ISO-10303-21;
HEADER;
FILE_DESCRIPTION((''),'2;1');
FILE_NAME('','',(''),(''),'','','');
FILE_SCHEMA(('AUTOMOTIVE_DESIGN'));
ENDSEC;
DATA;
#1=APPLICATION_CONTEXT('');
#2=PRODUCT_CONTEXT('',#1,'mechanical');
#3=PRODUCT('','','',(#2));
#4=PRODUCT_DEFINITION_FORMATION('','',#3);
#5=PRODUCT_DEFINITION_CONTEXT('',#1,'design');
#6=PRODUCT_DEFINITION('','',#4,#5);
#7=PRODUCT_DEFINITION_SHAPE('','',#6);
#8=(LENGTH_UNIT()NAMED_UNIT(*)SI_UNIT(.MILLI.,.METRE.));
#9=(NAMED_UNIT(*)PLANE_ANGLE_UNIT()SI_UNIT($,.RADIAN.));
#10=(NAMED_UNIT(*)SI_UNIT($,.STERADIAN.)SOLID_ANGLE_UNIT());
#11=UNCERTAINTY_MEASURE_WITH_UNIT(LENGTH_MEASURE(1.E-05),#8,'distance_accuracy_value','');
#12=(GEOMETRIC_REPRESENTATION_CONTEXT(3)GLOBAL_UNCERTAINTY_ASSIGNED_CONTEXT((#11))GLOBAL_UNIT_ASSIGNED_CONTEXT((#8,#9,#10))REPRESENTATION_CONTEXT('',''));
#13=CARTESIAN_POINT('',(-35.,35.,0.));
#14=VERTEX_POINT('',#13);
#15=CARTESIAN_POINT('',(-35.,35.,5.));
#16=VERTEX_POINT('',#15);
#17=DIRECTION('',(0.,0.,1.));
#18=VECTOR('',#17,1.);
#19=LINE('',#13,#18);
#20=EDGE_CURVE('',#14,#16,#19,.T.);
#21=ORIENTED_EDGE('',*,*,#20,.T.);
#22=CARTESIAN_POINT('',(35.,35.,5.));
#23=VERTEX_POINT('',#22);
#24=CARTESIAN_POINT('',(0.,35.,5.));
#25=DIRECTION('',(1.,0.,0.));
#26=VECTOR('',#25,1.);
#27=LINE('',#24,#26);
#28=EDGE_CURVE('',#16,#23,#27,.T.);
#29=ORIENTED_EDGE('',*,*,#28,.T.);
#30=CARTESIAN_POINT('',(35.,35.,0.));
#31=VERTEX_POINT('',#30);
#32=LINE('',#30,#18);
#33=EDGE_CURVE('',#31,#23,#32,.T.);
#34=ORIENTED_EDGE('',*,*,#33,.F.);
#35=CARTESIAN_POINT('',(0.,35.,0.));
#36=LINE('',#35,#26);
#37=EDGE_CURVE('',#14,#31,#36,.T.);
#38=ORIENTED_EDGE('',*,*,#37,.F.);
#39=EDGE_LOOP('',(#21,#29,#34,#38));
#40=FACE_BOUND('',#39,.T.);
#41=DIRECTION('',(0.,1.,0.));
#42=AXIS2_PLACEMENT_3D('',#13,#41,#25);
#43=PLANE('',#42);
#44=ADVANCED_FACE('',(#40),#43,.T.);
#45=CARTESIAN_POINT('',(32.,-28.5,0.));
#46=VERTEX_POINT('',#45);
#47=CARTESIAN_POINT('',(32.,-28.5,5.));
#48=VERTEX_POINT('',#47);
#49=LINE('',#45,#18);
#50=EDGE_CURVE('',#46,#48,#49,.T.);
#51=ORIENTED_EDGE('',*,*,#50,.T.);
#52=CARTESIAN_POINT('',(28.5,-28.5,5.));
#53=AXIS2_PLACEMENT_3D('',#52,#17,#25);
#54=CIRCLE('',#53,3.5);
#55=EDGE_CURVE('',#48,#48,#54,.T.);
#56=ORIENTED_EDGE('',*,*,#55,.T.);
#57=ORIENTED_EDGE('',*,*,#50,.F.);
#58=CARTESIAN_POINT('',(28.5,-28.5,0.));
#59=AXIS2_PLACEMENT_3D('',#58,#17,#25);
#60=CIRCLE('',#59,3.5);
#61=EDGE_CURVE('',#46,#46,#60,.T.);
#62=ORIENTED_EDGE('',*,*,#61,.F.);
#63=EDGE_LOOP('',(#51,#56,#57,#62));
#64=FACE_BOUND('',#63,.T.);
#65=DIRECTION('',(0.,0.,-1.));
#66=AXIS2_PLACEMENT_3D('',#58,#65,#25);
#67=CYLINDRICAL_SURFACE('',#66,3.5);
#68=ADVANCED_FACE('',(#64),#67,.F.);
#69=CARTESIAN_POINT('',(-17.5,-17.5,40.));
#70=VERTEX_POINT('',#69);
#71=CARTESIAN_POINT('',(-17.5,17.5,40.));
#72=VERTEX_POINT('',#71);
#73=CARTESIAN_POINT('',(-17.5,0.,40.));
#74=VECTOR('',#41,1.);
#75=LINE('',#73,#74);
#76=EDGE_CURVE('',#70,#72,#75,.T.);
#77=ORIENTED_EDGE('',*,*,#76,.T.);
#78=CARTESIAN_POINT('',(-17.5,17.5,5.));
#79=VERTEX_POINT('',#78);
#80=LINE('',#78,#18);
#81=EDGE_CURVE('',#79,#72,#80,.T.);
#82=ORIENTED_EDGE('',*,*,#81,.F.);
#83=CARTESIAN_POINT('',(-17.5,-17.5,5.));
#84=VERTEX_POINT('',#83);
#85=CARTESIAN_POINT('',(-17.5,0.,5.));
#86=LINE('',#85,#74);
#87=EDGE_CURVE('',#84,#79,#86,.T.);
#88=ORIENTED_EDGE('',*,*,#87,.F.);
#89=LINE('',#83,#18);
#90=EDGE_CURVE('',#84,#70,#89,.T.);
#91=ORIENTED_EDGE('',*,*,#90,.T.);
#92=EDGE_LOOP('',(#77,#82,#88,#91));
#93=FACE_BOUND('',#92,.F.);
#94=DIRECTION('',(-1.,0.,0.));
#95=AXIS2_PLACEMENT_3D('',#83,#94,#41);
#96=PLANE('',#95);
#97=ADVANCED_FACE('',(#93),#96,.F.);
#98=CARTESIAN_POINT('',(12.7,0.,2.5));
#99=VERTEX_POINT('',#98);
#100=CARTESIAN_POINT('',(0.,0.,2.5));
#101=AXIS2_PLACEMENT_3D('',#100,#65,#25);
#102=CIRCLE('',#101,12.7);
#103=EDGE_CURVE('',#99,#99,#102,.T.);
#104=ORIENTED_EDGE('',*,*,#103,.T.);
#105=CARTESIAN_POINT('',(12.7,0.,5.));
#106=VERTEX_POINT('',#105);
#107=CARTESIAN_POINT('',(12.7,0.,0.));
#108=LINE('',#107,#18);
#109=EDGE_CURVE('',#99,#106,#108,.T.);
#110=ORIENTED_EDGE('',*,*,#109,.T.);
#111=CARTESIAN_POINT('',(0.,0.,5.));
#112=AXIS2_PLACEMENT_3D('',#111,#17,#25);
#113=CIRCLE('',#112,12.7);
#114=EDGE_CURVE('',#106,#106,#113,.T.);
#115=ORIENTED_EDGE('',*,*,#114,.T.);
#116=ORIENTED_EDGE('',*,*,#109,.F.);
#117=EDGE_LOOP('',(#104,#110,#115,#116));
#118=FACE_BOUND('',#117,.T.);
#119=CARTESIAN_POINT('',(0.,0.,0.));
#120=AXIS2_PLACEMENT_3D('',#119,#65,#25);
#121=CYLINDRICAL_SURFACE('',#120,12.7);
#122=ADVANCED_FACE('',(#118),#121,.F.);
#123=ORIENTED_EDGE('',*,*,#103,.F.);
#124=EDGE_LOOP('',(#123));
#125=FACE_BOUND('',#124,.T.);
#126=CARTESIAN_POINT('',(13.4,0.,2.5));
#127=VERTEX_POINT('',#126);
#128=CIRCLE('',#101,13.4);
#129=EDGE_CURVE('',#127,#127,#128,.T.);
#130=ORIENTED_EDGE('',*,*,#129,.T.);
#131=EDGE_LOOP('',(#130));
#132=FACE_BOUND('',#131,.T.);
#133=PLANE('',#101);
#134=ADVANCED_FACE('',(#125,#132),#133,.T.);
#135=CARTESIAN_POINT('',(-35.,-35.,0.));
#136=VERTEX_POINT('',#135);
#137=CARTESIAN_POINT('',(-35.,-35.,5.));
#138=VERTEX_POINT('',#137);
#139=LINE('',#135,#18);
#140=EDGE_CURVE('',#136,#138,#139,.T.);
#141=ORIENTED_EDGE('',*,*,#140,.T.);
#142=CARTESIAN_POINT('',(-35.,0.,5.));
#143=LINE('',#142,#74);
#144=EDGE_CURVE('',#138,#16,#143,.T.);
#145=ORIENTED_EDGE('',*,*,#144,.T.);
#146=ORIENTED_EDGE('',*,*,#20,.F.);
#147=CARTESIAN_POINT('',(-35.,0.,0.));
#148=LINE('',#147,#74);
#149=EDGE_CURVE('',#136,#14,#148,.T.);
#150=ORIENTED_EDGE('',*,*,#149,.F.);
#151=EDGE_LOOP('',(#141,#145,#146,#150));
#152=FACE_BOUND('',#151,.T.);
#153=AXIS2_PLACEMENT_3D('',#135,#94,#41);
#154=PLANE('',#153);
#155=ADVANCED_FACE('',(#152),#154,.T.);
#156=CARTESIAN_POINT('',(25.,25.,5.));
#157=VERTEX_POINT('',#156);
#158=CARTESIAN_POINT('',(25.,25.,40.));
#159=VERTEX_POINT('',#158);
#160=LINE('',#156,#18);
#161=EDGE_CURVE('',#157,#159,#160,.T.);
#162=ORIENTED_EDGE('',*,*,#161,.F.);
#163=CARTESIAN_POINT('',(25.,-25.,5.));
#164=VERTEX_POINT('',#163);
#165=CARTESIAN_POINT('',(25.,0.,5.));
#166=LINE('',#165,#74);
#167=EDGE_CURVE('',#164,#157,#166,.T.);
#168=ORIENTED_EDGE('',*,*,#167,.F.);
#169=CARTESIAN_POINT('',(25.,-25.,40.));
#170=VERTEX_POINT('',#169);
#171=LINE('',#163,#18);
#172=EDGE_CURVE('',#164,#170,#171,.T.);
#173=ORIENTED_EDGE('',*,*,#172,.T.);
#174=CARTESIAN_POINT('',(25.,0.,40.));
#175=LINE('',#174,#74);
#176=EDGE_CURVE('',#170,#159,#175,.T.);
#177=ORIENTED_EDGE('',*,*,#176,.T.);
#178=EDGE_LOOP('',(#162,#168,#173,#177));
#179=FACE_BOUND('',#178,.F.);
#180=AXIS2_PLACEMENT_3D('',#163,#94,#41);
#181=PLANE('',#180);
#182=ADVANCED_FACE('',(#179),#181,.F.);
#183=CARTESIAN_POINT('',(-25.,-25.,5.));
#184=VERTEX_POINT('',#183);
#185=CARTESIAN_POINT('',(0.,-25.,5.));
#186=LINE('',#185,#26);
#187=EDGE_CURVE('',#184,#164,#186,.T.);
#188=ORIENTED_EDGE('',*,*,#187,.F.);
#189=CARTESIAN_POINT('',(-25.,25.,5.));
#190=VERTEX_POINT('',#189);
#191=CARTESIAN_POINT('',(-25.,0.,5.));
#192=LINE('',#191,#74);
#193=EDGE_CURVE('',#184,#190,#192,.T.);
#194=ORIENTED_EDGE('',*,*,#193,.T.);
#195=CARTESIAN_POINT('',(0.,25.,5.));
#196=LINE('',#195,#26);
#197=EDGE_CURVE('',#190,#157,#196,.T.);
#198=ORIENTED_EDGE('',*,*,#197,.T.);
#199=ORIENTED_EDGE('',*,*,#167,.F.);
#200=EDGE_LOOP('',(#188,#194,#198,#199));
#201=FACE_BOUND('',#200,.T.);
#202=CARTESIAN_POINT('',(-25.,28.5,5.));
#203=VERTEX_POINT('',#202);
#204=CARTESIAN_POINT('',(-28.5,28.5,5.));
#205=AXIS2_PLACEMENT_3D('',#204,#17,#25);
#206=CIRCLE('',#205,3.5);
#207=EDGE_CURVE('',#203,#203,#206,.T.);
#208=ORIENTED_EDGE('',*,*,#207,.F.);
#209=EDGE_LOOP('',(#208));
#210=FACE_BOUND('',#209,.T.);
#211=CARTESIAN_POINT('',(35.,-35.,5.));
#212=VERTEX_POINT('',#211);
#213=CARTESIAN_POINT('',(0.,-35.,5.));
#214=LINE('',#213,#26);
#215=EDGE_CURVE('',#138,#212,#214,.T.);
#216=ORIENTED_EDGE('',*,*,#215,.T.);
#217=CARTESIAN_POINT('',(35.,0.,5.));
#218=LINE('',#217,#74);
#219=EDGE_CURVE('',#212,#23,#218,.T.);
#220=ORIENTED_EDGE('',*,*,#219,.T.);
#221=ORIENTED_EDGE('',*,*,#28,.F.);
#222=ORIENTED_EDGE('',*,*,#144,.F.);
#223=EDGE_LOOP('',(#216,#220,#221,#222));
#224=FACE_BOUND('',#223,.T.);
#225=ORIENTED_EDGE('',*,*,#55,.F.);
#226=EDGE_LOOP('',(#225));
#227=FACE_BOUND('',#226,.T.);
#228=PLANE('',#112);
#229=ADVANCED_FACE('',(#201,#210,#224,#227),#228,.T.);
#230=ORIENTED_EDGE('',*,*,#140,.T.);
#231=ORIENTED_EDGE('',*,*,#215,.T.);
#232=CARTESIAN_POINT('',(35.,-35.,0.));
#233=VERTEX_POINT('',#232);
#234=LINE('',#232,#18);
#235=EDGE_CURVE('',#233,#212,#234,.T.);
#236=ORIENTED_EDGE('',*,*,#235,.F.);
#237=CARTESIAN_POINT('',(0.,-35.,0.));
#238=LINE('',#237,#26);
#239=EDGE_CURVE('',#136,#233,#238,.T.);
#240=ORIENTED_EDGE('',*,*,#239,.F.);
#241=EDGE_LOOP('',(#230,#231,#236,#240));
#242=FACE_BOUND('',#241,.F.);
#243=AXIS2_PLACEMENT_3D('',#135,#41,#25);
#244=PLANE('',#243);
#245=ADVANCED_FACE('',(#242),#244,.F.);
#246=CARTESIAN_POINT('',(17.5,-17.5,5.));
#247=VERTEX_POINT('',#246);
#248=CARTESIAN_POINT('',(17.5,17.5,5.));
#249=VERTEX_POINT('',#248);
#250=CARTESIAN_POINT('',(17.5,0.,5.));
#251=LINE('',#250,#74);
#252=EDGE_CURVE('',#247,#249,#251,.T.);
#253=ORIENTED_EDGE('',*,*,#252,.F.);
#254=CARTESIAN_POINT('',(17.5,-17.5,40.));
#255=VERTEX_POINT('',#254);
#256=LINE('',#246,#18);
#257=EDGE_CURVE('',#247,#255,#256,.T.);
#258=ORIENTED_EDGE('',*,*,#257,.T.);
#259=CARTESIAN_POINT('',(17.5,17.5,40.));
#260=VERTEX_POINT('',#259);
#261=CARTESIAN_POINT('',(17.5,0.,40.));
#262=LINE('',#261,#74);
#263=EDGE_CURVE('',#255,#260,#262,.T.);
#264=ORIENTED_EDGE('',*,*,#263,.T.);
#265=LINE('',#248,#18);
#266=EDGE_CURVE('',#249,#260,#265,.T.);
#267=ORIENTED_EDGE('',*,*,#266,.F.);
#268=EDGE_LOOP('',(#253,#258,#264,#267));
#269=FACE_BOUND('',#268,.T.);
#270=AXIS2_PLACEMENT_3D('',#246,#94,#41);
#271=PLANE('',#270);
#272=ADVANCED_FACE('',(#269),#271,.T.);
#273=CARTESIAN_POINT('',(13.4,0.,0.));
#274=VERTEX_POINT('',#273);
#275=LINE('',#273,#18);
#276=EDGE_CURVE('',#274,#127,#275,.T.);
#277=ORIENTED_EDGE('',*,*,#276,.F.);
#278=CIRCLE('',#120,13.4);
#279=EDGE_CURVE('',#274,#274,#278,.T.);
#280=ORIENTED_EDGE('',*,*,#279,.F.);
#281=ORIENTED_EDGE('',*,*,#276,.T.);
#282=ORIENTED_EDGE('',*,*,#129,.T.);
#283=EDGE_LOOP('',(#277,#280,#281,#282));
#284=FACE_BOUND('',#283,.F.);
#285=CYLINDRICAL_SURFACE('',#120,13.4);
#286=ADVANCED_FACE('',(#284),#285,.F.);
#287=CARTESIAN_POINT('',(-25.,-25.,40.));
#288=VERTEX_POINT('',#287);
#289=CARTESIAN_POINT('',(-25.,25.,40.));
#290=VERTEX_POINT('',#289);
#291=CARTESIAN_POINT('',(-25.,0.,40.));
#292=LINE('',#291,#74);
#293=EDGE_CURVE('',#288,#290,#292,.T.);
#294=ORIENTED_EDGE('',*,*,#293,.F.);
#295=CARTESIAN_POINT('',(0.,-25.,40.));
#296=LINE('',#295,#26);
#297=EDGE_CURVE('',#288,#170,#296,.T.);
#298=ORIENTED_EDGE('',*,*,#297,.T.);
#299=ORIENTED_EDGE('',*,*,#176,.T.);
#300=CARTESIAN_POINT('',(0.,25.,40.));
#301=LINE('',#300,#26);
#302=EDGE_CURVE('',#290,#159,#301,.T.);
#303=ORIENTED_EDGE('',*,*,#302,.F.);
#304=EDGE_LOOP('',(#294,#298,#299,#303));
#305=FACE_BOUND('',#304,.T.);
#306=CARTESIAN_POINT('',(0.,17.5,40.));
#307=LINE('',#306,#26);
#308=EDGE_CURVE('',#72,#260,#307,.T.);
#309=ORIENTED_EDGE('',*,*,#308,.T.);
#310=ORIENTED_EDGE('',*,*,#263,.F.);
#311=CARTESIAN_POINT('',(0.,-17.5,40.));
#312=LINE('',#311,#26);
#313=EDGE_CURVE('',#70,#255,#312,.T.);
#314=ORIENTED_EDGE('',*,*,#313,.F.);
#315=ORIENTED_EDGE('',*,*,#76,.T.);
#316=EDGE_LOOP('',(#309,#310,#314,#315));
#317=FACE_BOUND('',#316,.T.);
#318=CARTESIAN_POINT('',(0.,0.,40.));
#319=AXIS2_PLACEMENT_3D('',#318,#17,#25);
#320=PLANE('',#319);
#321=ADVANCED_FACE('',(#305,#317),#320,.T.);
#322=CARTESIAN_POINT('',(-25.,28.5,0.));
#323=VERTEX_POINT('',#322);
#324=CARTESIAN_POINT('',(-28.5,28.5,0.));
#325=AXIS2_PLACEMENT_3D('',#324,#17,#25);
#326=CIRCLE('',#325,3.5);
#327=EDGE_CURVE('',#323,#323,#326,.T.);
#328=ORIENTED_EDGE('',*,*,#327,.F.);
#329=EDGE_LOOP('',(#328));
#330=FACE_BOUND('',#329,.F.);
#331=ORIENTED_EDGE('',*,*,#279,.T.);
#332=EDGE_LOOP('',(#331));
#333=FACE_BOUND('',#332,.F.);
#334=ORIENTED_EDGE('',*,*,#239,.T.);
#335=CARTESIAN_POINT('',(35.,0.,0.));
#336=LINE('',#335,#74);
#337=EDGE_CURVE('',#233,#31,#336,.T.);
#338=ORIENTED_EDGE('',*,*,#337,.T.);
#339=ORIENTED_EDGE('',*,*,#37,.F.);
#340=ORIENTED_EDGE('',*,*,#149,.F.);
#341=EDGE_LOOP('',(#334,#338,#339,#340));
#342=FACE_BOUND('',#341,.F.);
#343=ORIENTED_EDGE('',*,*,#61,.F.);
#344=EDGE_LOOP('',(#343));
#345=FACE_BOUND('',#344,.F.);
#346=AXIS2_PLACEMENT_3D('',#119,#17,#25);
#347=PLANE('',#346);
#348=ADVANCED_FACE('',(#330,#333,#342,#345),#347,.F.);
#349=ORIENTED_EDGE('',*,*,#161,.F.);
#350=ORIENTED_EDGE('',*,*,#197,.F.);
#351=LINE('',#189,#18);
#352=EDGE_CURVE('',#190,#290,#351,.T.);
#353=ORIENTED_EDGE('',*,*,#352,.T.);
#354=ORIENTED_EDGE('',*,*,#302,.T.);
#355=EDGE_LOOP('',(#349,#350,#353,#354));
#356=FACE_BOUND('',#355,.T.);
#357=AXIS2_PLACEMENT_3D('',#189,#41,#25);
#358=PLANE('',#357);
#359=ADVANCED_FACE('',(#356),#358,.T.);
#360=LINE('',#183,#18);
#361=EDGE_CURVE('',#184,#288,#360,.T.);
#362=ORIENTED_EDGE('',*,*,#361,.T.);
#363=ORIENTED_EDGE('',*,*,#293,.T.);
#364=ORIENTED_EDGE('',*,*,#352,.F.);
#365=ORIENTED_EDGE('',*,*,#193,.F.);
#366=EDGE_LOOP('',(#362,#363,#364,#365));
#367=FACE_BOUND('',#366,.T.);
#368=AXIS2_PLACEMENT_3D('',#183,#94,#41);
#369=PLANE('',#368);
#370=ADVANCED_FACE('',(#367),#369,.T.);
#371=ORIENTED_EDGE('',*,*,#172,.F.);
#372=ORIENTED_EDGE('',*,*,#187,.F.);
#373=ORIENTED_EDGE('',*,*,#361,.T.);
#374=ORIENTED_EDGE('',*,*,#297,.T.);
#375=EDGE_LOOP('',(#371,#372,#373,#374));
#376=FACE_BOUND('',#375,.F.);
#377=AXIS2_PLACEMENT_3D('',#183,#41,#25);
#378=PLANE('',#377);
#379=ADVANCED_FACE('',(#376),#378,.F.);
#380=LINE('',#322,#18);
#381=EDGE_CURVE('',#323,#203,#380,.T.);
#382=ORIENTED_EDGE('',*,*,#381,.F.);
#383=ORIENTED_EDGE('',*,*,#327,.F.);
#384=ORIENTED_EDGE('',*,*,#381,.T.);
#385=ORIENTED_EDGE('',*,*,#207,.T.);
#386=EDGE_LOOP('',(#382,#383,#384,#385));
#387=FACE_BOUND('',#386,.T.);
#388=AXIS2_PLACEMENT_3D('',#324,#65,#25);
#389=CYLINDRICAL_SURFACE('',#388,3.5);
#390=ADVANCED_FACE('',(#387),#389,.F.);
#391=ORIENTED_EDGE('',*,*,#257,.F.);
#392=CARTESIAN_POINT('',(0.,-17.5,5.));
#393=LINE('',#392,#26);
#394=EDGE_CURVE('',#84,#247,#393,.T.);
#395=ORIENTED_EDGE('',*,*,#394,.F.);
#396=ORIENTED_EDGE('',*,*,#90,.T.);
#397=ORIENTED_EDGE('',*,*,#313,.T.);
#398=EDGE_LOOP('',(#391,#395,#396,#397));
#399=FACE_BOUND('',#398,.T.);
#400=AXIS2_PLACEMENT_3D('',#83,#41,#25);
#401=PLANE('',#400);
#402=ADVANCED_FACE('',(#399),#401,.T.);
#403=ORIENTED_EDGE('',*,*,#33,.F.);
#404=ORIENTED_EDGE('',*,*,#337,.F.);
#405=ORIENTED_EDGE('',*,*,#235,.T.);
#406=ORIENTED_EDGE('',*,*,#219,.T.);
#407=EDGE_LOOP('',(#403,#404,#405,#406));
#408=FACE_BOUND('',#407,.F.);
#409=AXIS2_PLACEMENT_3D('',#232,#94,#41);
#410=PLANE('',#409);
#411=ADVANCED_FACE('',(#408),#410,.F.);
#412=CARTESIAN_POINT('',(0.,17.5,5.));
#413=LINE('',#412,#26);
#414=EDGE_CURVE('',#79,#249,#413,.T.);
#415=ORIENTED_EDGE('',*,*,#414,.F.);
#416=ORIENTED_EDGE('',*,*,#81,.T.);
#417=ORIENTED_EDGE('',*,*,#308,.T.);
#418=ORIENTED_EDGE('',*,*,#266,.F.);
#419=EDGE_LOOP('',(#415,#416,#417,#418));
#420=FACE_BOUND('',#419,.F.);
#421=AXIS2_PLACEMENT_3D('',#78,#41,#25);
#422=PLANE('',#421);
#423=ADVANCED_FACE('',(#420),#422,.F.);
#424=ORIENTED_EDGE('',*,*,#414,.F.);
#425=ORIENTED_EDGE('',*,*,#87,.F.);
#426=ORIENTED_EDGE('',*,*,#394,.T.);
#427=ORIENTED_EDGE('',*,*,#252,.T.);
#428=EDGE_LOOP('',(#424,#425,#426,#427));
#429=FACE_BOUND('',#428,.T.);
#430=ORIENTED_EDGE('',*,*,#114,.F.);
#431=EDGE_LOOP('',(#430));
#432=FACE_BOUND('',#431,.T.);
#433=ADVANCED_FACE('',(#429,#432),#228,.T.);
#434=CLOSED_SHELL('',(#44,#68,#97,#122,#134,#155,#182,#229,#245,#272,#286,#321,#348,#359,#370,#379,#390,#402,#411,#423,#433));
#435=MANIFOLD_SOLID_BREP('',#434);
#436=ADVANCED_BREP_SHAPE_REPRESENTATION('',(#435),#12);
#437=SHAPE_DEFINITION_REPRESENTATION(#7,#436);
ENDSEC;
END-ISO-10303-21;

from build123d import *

# Parameters (mm, degrees)
F0_W     = 70
F0_H     = 70
F0_R     = 3.5
F0_R_2   = 12.7
F1_DEPTH = 5
F2_W     = 50
F2_H     = 50
F2_W_2   = 35
F2_H_2   = 35
F3_DEPTH = 35
F4_R     = 13.4
F4_R_2   = 12.7
F5_DEPTH = 2.5


# Not quite as in the source:
# - a feature names something its author has since deleted; it is built from what else it names


with BuildPart() as f1:
    # F0 (on Top) → F1 (new body)
    with BuildSketch(Plane.XY):
        Rectangle(F0_W, F0_H)
        with Locations((28.5, -28.5)):
            Circle(F0_R, mode=Mode.SUBTRACT)
        with Locations((-28.5, 28.5)):
            Circle(F0_R, mode=Mode.SUBTRACT)
        Circle(F0_R_2, mode=Mode.SUBTRACT)
    extrude(amount=F1_DEPTH)

    # F2 (on face) → F3 (join)
    with BuildSketch(Plane.XY.offset(5)):
        Rectangle(F2_W, F2_H)
        Rectangle(F2_W_2, F2_H_2, mode=Mode.SUBTRACT)
    extrude(amount=F3_DEPTH)

    # F4 (on face) → F5 (cut)
    with BuildSketch(Plane(origin=(0, 0, 0), x_dir=(1, 0, 0), z_dir=(0, 0, -1))):
        Circle(F4_R)
        Circle(F4_R_2, mode=Mode.SUBTRACT)
    extrude(amount=-F5_DEPTH, mode=Mode.SUBTRACT)


solid = f1.part
